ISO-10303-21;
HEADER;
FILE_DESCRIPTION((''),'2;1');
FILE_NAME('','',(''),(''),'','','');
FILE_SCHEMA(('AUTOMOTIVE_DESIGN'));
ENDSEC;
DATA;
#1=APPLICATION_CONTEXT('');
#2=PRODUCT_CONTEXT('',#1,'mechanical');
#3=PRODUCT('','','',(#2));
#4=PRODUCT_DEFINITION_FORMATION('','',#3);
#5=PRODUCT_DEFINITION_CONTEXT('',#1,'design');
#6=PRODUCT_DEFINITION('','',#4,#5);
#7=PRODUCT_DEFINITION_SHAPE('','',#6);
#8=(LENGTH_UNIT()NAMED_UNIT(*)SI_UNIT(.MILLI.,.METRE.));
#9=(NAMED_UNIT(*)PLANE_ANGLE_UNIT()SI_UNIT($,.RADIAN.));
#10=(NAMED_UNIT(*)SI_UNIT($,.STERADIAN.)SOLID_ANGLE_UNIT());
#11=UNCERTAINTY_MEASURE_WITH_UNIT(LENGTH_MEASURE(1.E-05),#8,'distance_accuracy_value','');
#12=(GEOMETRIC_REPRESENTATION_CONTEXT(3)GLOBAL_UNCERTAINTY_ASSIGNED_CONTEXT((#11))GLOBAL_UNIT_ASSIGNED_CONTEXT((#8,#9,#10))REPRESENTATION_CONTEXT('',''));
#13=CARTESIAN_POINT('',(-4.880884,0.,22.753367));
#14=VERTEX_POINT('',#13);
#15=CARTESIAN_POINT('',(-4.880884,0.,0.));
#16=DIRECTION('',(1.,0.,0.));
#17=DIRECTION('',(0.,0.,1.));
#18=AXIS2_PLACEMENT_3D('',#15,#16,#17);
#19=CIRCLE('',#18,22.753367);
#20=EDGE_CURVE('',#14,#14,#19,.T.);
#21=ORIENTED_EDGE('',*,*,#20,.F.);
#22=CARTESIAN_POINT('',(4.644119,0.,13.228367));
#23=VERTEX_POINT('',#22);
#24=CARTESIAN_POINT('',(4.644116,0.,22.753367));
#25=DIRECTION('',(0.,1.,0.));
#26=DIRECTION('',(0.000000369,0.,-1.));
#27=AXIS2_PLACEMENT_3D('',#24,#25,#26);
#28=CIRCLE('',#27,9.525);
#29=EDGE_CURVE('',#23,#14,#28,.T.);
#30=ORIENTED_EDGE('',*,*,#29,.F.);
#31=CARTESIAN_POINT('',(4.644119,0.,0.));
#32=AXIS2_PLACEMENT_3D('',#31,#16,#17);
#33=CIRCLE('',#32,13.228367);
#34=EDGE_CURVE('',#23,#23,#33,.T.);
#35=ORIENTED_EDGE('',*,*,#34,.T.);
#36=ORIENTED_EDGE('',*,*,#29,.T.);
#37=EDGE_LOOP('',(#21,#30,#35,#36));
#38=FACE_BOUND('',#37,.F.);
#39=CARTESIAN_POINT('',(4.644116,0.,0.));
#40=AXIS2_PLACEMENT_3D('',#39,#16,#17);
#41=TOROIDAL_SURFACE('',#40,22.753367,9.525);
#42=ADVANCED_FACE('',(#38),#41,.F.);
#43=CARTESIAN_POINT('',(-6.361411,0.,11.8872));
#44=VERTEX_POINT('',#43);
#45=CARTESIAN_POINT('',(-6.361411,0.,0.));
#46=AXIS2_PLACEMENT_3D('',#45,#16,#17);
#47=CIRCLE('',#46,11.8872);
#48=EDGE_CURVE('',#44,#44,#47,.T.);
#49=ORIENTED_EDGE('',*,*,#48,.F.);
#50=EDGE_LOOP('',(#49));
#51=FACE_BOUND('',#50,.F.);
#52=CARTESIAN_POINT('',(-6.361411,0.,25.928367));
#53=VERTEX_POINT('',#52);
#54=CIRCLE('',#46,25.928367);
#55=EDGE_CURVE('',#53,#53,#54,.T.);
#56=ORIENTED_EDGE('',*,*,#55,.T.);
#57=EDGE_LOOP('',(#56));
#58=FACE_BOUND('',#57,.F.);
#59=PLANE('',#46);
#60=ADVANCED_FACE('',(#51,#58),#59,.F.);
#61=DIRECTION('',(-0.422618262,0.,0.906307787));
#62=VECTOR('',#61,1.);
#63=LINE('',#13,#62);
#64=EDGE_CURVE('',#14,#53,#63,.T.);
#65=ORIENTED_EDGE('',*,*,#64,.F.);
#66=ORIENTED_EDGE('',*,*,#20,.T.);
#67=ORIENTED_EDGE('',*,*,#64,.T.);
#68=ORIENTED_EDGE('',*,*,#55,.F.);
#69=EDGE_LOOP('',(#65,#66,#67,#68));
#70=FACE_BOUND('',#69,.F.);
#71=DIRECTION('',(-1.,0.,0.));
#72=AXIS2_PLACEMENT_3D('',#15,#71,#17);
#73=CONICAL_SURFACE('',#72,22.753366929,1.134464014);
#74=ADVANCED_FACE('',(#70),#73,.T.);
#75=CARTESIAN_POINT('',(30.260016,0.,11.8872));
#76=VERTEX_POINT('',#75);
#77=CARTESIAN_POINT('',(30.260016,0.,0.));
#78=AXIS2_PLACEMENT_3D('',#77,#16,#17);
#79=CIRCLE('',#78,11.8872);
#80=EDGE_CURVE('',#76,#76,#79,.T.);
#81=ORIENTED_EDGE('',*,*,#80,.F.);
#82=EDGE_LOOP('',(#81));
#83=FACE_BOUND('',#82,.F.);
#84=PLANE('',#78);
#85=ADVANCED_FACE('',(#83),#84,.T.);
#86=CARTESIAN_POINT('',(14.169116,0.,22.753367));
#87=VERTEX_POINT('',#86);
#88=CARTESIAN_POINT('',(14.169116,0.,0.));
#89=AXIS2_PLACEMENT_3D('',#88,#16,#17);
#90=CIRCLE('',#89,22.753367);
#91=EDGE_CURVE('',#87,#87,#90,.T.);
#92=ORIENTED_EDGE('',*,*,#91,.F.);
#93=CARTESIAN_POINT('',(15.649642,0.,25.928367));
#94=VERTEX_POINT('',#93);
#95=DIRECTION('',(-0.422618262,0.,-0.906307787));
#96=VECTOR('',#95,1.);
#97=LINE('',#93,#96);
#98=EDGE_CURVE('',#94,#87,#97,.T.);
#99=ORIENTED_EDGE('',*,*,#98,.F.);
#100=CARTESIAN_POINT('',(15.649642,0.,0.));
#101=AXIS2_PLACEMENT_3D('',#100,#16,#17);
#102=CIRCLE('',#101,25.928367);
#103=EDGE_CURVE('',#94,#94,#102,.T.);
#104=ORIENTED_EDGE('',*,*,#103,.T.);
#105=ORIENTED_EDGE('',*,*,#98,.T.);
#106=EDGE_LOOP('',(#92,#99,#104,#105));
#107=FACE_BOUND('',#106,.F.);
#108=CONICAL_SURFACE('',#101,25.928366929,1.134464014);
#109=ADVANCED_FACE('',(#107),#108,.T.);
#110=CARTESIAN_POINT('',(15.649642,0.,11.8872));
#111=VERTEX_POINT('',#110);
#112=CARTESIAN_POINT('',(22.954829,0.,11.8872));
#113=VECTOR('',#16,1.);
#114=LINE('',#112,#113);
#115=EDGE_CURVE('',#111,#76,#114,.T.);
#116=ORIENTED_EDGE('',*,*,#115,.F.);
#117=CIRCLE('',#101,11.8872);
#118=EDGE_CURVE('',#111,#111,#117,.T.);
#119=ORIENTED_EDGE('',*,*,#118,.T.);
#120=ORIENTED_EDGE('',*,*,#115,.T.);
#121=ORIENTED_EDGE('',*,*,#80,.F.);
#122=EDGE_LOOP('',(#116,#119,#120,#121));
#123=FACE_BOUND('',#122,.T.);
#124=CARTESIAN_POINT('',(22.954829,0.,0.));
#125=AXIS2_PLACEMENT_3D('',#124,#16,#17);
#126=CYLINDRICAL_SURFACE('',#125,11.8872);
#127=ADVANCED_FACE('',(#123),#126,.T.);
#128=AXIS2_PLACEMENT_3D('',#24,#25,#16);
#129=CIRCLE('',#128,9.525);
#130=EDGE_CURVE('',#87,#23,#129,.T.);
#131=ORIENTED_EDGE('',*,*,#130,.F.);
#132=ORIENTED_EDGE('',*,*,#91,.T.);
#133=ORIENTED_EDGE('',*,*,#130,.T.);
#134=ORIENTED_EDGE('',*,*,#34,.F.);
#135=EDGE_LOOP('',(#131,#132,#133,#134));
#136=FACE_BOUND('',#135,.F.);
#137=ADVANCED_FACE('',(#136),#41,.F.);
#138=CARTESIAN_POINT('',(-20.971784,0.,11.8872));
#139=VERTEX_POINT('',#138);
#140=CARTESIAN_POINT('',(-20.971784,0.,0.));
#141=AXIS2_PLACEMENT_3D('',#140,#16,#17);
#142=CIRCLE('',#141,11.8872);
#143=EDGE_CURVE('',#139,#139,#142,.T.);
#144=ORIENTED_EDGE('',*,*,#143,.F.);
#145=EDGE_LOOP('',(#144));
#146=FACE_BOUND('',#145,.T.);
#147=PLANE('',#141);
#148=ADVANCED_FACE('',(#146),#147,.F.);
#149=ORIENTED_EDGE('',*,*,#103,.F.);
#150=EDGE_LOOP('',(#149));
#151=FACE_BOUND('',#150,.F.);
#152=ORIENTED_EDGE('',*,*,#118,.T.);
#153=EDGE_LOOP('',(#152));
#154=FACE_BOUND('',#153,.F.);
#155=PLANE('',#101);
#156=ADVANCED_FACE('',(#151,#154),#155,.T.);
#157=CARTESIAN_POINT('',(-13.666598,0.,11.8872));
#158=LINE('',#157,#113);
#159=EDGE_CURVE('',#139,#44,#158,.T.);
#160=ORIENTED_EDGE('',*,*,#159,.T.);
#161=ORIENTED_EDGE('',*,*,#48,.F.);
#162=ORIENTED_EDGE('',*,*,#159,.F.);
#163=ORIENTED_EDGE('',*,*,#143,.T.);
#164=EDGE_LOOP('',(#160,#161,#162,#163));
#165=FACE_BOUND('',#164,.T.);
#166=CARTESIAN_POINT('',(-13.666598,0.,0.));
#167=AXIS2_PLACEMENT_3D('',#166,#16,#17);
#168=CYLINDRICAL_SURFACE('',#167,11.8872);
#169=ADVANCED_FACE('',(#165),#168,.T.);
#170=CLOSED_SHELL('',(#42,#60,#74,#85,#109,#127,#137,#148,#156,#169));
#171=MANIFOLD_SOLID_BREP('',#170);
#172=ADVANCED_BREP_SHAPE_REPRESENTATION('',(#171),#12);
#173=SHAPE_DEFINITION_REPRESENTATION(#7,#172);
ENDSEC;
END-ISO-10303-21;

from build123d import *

# Parameters (mm, degrees)
F0_W = 14.6103731854
F0_H = 11.8872


# Not quite as in the source:
# - ends of sketch curves that miss each other by under 0.0002 mm in the source are joined


with BuildPart() as f1:
    # F0 (on Front) → F1 (revolve)
    with BuildSketch(Plane.XZ):
        with Locations((-13.6665977984, 5.9436)):
            Rectangle(F0_W, F0_H)
        with BuildLine():
            Line((-6.3614112057, 11.8872), (-6.3614112057, 0))
            Line((-6.3614112057, 0), (15.6496424236, 0))
            Line((15.6496424236, 0), (15.6496424236, 11.8872))
            Line((15.6496424236, 11.8872), (15.6496424236, 25.9283669293))
            Line((15.6496424236, 25.9283669293), (14.1691156089, 22.7533669293))
            ThreePointArc((14.1691156089, 22.7533669293), (11.3793089407, 16.0181760794), (4.6441191189, 13.2283669293))
            ThreePointArc((4.6441191189, 13.2283669293), (-2.0910777228, 16.0181760794), (-4.8808843911, 22.7533669293))
            Line((-4.8808843911, 22.7533669293), (-6.3614112057, 25.9283669293))
            Line((-6.3614112057, 25.9283669293), (-6.3614112057, 11.8872))
        make_face()
        with Locations((22.9548290163, 5.9436)):
            Rectangle(F0_W, F0_H)
    revolve(axis=Axis((4.6441156089, 0, 0), (1, 0, 0)))


solid = f1.part
